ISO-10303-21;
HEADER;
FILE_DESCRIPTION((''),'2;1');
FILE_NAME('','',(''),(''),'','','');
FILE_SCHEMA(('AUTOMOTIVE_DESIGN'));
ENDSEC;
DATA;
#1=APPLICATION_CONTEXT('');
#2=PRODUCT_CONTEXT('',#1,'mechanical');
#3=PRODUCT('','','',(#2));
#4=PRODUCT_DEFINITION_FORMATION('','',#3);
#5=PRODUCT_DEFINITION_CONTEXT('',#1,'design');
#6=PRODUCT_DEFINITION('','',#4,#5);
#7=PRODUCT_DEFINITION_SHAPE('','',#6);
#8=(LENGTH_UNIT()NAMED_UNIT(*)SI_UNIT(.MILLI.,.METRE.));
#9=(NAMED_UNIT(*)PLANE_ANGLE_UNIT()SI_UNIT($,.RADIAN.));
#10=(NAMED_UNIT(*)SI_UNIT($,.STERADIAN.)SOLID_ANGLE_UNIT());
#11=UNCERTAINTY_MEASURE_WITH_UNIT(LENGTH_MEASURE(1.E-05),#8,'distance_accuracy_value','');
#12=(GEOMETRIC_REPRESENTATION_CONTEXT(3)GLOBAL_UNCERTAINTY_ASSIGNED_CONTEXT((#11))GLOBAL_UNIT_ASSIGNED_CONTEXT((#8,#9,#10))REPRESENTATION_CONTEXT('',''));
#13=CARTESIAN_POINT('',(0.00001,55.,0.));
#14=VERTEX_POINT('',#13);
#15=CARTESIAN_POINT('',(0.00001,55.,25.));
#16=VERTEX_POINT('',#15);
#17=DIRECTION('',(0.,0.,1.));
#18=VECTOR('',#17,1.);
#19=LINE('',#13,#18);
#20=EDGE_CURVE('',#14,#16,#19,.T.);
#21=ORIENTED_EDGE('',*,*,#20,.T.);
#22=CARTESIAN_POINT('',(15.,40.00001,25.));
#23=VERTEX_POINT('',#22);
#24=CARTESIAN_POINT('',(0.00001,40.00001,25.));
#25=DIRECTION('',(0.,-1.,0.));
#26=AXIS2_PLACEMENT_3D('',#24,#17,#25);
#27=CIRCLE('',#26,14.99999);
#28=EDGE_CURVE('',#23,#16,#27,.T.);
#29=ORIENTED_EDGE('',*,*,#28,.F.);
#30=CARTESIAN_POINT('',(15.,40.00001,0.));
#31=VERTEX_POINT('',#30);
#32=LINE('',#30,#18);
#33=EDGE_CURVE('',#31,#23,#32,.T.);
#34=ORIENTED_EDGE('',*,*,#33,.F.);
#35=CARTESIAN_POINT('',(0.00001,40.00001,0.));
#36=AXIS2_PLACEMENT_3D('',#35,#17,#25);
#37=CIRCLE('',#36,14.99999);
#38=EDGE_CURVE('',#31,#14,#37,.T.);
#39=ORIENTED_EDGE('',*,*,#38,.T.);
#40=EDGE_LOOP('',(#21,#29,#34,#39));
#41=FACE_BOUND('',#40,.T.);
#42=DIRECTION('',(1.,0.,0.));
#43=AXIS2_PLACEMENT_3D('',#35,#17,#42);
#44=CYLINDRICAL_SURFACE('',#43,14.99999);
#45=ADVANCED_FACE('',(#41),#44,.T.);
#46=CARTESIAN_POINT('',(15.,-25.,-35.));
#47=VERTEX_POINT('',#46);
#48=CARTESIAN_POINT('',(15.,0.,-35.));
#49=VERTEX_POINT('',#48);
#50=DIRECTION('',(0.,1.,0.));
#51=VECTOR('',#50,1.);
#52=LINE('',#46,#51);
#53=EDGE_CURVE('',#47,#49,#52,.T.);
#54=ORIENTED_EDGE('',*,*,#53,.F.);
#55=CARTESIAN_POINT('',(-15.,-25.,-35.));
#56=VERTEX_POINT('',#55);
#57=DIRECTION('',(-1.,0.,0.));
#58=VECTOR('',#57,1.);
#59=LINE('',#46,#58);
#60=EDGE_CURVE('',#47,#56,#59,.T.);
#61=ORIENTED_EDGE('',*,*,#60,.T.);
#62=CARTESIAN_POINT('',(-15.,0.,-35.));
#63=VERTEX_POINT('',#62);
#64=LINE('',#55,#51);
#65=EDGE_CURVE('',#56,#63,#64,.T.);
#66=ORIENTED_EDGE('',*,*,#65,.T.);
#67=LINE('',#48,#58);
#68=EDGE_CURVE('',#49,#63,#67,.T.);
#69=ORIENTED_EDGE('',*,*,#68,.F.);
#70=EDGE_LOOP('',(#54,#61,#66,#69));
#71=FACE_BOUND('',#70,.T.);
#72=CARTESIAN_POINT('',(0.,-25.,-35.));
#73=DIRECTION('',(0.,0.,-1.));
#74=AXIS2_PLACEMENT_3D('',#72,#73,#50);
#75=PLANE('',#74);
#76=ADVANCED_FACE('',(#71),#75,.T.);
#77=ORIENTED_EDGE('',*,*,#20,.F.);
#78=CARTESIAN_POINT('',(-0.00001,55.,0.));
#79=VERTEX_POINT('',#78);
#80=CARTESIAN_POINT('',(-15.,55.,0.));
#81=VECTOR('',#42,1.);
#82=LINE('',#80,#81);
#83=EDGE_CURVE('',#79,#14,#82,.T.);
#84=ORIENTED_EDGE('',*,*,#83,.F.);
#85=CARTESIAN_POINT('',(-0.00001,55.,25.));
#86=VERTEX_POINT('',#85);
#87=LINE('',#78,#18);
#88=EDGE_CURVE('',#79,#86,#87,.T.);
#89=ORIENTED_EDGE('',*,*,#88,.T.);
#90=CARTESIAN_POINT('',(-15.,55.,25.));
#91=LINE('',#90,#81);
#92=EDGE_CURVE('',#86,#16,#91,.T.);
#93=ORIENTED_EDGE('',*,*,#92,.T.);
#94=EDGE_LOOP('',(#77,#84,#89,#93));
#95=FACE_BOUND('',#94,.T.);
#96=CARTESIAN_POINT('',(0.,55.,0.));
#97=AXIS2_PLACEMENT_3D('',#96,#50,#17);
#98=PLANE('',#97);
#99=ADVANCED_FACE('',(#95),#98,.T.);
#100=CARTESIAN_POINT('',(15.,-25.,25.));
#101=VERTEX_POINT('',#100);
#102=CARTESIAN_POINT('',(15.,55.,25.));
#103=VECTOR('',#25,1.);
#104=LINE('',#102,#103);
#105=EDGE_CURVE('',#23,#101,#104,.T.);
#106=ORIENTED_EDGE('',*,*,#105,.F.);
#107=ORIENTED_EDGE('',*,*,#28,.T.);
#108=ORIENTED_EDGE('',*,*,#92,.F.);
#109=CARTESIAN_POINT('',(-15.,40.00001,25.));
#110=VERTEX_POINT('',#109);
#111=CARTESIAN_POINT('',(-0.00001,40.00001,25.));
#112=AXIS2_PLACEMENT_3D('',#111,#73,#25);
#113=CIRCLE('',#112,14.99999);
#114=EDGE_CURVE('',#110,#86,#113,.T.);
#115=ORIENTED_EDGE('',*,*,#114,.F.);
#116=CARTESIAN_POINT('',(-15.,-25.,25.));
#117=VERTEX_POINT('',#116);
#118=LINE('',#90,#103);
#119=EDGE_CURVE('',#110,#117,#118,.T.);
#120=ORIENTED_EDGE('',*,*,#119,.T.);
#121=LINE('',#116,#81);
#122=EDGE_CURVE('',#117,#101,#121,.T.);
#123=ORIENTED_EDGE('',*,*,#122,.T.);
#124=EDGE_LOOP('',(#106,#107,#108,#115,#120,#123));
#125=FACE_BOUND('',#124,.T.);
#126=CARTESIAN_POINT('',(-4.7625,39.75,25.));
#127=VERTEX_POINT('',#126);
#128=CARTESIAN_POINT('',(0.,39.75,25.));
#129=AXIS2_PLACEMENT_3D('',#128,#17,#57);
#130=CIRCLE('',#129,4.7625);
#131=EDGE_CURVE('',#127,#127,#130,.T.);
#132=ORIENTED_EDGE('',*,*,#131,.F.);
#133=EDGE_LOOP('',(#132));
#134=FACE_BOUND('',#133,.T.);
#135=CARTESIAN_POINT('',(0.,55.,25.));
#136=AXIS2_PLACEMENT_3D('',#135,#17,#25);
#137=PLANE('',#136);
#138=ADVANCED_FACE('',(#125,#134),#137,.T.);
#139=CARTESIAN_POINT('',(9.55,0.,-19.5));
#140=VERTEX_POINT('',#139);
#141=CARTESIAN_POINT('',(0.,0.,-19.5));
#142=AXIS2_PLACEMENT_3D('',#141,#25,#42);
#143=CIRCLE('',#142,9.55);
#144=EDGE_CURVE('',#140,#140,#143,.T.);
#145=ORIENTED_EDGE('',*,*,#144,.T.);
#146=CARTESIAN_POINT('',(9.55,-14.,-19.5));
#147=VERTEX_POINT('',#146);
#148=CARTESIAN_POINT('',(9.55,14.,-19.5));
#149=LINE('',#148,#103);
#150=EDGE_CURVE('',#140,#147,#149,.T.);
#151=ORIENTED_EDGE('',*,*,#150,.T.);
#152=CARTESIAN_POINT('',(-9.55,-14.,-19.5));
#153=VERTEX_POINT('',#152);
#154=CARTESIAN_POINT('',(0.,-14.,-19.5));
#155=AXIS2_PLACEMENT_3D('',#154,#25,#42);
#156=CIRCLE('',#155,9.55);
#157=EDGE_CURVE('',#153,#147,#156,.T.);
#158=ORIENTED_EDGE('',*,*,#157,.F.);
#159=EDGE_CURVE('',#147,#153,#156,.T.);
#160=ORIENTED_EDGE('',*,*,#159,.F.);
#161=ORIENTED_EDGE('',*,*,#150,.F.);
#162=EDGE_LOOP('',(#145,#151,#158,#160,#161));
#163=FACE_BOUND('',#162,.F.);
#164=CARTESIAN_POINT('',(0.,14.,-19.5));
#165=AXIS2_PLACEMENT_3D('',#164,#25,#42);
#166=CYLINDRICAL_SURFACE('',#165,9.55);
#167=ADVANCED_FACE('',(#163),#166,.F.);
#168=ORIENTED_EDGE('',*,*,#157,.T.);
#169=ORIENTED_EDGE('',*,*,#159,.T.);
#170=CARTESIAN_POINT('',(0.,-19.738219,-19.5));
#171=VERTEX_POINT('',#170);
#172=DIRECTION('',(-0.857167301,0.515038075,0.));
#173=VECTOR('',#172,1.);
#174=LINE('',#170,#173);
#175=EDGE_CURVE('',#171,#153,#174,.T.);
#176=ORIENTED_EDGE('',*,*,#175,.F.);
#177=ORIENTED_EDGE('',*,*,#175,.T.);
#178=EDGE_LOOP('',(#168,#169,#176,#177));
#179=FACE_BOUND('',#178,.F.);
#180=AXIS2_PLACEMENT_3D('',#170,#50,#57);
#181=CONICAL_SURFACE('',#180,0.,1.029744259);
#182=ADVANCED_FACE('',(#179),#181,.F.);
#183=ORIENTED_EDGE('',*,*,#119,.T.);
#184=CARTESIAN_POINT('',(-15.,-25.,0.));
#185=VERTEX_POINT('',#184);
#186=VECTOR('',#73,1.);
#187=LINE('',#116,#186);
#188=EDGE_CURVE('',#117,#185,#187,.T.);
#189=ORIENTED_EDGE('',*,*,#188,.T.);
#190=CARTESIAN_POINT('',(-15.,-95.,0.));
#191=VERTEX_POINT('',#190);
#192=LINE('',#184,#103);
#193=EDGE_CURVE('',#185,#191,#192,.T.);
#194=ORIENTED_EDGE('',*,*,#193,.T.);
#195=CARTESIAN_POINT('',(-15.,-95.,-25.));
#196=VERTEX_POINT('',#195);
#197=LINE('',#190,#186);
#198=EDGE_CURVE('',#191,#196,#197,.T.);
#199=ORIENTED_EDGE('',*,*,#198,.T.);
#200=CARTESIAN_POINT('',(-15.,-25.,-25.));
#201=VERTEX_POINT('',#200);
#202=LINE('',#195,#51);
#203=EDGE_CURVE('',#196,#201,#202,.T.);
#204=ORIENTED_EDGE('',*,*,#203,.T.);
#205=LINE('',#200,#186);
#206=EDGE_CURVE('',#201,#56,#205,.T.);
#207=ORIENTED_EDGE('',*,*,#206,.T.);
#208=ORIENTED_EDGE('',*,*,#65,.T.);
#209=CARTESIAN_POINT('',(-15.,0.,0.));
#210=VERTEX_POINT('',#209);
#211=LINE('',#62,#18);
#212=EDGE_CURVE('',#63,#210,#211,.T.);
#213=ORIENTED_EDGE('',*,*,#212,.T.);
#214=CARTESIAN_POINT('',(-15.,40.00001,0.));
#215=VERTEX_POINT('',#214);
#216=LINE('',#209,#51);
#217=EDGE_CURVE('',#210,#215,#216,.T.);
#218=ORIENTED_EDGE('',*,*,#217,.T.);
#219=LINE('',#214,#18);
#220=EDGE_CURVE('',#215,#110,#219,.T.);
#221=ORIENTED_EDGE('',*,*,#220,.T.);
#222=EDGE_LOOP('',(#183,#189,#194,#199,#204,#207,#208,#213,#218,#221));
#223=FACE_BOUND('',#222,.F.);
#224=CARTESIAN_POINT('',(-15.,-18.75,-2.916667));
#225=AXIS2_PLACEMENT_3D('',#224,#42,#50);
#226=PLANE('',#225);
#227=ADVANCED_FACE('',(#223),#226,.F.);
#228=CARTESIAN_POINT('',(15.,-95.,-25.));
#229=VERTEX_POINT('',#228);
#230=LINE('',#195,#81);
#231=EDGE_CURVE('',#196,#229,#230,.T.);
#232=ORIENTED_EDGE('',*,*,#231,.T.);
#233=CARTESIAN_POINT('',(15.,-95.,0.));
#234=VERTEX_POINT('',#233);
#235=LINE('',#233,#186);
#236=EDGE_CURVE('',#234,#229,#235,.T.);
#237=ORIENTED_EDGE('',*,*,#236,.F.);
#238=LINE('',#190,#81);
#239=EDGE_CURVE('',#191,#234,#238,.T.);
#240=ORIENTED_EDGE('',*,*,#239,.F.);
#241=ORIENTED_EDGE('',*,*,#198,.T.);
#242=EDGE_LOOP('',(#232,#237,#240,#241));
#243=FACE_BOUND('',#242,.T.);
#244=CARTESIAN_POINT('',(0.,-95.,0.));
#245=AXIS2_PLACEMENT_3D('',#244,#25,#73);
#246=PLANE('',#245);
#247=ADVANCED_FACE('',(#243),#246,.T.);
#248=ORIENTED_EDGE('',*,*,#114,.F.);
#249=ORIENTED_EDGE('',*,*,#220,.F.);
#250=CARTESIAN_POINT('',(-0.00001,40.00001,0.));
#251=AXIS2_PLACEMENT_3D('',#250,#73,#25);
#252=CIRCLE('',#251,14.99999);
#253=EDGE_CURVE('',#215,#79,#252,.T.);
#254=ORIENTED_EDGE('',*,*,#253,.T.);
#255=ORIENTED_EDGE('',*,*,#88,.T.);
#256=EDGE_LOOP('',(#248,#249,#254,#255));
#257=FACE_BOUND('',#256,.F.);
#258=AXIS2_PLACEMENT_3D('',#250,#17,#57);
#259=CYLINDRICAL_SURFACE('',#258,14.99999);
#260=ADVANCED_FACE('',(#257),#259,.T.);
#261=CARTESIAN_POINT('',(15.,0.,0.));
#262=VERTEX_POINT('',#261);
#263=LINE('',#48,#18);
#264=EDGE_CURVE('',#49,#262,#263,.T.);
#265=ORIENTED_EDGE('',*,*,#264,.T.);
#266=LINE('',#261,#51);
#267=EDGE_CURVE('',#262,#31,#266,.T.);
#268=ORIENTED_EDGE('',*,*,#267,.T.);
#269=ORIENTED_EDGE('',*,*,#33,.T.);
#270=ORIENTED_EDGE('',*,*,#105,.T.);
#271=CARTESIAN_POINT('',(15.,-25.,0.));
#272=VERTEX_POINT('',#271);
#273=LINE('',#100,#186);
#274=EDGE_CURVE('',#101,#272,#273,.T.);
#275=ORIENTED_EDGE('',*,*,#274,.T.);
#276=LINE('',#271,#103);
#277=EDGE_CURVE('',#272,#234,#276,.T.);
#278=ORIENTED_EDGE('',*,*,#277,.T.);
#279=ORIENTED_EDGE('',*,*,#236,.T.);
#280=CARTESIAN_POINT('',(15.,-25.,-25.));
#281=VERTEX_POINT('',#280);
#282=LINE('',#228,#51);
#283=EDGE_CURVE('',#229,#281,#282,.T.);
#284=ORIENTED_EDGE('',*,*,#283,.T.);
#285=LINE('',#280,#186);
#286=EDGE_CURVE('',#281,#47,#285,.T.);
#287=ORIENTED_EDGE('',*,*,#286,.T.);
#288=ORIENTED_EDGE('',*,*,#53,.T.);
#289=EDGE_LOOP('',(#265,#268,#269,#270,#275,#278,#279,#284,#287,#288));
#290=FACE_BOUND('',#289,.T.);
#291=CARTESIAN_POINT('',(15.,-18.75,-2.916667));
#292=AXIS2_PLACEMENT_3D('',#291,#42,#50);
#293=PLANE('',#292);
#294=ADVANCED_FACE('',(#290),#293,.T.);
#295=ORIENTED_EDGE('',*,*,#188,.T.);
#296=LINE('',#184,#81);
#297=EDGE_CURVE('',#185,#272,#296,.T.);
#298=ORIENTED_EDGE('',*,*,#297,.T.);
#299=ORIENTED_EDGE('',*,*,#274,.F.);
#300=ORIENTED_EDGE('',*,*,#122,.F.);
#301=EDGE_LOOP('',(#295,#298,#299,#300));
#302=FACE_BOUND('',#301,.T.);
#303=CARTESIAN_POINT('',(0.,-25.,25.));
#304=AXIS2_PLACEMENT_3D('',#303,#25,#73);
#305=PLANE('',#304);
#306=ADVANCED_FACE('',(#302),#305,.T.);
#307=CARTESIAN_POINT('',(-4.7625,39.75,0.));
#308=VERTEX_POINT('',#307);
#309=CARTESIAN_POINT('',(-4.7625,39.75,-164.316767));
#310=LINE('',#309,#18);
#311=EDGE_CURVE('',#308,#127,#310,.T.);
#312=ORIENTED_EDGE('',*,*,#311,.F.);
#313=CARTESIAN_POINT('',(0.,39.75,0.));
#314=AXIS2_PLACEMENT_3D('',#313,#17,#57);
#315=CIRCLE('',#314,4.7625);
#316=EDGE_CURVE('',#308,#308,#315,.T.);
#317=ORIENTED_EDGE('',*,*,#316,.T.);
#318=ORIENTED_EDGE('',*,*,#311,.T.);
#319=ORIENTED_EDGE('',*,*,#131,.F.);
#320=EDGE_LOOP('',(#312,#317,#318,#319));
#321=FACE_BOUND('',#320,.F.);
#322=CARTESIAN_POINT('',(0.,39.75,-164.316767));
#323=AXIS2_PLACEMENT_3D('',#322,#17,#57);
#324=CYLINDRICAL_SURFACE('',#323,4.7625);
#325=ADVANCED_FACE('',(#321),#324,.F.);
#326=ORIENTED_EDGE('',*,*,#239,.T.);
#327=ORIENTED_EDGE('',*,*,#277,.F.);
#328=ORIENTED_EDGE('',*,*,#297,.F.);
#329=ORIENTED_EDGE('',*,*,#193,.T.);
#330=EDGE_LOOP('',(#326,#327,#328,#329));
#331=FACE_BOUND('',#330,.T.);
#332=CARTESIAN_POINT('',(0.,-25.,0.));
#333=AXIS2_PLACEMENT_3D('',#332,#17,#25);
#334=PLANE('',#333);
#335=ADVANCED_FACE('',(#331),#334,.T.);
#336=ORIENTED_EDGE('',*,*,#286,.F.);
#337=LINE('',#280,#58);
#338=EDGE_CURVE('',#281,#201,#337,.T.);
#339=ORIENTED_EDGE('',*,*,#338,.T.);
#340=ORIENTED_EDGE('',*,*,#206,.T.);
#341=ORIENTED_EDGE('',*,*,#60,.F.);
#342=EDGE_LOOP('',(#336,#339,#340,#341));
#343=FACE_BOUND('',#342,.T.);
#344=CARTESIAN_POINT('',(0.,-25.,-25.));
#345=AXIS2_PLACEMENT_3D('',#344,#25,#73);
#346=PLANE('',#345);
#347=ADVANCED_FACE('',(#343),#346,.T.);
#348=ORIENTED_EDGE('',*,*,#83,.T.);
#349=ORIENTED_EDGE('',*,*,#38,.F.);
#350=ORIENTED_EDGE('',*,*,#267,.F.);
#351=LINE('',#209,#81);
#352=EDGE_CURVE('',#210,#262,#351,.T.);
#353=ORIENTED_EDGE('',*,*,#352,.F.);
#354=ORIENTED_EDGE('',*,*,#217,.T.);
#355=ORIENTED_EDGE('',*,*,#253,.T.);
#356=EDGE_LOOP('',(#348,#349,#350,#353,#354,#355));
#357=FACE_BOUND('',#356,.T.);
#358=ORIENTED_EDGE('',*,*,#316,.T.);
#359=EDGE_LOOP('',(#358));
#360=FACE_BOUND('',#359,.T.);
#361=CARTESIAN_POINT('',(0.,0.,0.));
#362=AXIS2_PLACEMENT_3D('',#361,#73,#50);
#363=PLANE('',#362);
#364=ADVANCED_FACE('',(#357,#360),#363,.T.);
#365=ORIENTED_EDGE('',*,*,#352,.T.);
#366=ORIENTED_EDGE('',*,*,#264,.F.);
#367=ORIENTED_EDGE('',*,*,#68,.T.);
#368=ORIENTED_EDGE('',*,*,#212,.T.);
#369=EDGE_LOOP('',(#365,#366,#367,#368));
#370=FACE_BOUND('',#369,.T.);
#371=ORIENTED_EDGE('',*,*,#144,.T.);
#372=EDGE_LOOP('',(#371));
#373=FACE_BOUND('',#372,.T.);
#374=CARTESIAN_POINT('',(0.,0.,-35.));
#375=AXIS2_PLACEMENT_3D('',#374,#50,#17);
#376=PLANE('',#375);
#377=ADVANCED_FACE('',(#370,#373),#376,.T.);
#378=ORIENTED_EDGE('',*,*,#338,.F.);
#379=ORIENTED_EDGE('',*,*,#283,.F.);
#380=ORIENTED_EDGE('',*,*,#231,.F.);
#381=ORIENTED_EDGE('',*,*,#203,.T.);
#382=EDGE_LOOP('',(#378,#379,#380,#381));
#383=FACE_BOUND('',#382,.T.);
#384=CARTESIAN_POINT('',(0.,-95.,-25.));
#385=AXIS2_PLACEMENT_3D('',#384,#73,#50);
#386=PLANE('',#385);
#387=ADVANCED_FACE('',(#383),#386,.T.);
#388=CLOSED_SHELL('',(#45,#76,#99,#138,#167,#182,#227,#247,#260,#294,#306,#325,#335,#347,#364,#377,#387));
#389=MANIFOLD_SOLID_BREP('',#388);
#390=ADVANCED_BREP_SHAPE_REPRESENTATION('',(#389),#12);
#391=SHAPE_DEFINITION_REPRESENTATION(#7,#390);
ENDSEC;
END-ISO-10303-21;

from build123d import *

# Parameters (mm, degrees)
F1_DEPTH = 15
F3_D     = 19.1
F3_DEPTH = 14
F3_TIP   = 5.7382189117
F5_R     = 14.99999
F6_D     = 9.525


# Not quite as in the source:
# - a fillet or chamfer is up to 0.001 mm smaller than in the source, because OpenCascade refuses the exact size
# - a length typed as a fraction of an inch, garbled in the dataset ("3 / 203.2 mm" for 3/8 in), is restored


with BuildPart() as f1:
    # F0 (on Right) → F1 (new body, symmetric)
    with BuildSketch(Plane.YZ):
        Polygon((0, -35), (0, 0), (55, 0), (55, 25), (-25, 25), (-25, 0), (-95, 0), (-95, -25), (-25, -25), (-25, -35), align=None)
    extrude(amount=F1_DEPTH, both=True)

    # F3
    with Locations(Plane(origin=(0, 0, 0), x_dir=(-1, 0, 0), z_dir=(0, 1, 0))):
        with Locations((0, -19.5)):
            Hole(F3_D / 2, depth=F3_DEPTH)
            with Locations((0, 0, -(F3_DEPTH + F3_TIP / 2))):  # 118° drill point
                Cone(0, F3_D / 2, F3_TIP, mode=Mode.SUBTRACT)

    # F5 (radius 15 in the source; OpenCascade refuses exactly that, so slightly less here)
    f5_edges = [f1.edges().sort_by_distance(p)[0] for p in [
        (-15, 55, 12.5),
        (15, 55, 12.5),
    ]]
    fillet(f5_edges, radius=F5_R)

    # F6 (through all)
    with Locations(Plane(origin=(0, 0, 0), x_dir=(1, 0, 0), z_dir=(0, 0, -1))):
        with Locations((0, -39.75)):
            Hole(F6_D / 2)


solid = f1.part
